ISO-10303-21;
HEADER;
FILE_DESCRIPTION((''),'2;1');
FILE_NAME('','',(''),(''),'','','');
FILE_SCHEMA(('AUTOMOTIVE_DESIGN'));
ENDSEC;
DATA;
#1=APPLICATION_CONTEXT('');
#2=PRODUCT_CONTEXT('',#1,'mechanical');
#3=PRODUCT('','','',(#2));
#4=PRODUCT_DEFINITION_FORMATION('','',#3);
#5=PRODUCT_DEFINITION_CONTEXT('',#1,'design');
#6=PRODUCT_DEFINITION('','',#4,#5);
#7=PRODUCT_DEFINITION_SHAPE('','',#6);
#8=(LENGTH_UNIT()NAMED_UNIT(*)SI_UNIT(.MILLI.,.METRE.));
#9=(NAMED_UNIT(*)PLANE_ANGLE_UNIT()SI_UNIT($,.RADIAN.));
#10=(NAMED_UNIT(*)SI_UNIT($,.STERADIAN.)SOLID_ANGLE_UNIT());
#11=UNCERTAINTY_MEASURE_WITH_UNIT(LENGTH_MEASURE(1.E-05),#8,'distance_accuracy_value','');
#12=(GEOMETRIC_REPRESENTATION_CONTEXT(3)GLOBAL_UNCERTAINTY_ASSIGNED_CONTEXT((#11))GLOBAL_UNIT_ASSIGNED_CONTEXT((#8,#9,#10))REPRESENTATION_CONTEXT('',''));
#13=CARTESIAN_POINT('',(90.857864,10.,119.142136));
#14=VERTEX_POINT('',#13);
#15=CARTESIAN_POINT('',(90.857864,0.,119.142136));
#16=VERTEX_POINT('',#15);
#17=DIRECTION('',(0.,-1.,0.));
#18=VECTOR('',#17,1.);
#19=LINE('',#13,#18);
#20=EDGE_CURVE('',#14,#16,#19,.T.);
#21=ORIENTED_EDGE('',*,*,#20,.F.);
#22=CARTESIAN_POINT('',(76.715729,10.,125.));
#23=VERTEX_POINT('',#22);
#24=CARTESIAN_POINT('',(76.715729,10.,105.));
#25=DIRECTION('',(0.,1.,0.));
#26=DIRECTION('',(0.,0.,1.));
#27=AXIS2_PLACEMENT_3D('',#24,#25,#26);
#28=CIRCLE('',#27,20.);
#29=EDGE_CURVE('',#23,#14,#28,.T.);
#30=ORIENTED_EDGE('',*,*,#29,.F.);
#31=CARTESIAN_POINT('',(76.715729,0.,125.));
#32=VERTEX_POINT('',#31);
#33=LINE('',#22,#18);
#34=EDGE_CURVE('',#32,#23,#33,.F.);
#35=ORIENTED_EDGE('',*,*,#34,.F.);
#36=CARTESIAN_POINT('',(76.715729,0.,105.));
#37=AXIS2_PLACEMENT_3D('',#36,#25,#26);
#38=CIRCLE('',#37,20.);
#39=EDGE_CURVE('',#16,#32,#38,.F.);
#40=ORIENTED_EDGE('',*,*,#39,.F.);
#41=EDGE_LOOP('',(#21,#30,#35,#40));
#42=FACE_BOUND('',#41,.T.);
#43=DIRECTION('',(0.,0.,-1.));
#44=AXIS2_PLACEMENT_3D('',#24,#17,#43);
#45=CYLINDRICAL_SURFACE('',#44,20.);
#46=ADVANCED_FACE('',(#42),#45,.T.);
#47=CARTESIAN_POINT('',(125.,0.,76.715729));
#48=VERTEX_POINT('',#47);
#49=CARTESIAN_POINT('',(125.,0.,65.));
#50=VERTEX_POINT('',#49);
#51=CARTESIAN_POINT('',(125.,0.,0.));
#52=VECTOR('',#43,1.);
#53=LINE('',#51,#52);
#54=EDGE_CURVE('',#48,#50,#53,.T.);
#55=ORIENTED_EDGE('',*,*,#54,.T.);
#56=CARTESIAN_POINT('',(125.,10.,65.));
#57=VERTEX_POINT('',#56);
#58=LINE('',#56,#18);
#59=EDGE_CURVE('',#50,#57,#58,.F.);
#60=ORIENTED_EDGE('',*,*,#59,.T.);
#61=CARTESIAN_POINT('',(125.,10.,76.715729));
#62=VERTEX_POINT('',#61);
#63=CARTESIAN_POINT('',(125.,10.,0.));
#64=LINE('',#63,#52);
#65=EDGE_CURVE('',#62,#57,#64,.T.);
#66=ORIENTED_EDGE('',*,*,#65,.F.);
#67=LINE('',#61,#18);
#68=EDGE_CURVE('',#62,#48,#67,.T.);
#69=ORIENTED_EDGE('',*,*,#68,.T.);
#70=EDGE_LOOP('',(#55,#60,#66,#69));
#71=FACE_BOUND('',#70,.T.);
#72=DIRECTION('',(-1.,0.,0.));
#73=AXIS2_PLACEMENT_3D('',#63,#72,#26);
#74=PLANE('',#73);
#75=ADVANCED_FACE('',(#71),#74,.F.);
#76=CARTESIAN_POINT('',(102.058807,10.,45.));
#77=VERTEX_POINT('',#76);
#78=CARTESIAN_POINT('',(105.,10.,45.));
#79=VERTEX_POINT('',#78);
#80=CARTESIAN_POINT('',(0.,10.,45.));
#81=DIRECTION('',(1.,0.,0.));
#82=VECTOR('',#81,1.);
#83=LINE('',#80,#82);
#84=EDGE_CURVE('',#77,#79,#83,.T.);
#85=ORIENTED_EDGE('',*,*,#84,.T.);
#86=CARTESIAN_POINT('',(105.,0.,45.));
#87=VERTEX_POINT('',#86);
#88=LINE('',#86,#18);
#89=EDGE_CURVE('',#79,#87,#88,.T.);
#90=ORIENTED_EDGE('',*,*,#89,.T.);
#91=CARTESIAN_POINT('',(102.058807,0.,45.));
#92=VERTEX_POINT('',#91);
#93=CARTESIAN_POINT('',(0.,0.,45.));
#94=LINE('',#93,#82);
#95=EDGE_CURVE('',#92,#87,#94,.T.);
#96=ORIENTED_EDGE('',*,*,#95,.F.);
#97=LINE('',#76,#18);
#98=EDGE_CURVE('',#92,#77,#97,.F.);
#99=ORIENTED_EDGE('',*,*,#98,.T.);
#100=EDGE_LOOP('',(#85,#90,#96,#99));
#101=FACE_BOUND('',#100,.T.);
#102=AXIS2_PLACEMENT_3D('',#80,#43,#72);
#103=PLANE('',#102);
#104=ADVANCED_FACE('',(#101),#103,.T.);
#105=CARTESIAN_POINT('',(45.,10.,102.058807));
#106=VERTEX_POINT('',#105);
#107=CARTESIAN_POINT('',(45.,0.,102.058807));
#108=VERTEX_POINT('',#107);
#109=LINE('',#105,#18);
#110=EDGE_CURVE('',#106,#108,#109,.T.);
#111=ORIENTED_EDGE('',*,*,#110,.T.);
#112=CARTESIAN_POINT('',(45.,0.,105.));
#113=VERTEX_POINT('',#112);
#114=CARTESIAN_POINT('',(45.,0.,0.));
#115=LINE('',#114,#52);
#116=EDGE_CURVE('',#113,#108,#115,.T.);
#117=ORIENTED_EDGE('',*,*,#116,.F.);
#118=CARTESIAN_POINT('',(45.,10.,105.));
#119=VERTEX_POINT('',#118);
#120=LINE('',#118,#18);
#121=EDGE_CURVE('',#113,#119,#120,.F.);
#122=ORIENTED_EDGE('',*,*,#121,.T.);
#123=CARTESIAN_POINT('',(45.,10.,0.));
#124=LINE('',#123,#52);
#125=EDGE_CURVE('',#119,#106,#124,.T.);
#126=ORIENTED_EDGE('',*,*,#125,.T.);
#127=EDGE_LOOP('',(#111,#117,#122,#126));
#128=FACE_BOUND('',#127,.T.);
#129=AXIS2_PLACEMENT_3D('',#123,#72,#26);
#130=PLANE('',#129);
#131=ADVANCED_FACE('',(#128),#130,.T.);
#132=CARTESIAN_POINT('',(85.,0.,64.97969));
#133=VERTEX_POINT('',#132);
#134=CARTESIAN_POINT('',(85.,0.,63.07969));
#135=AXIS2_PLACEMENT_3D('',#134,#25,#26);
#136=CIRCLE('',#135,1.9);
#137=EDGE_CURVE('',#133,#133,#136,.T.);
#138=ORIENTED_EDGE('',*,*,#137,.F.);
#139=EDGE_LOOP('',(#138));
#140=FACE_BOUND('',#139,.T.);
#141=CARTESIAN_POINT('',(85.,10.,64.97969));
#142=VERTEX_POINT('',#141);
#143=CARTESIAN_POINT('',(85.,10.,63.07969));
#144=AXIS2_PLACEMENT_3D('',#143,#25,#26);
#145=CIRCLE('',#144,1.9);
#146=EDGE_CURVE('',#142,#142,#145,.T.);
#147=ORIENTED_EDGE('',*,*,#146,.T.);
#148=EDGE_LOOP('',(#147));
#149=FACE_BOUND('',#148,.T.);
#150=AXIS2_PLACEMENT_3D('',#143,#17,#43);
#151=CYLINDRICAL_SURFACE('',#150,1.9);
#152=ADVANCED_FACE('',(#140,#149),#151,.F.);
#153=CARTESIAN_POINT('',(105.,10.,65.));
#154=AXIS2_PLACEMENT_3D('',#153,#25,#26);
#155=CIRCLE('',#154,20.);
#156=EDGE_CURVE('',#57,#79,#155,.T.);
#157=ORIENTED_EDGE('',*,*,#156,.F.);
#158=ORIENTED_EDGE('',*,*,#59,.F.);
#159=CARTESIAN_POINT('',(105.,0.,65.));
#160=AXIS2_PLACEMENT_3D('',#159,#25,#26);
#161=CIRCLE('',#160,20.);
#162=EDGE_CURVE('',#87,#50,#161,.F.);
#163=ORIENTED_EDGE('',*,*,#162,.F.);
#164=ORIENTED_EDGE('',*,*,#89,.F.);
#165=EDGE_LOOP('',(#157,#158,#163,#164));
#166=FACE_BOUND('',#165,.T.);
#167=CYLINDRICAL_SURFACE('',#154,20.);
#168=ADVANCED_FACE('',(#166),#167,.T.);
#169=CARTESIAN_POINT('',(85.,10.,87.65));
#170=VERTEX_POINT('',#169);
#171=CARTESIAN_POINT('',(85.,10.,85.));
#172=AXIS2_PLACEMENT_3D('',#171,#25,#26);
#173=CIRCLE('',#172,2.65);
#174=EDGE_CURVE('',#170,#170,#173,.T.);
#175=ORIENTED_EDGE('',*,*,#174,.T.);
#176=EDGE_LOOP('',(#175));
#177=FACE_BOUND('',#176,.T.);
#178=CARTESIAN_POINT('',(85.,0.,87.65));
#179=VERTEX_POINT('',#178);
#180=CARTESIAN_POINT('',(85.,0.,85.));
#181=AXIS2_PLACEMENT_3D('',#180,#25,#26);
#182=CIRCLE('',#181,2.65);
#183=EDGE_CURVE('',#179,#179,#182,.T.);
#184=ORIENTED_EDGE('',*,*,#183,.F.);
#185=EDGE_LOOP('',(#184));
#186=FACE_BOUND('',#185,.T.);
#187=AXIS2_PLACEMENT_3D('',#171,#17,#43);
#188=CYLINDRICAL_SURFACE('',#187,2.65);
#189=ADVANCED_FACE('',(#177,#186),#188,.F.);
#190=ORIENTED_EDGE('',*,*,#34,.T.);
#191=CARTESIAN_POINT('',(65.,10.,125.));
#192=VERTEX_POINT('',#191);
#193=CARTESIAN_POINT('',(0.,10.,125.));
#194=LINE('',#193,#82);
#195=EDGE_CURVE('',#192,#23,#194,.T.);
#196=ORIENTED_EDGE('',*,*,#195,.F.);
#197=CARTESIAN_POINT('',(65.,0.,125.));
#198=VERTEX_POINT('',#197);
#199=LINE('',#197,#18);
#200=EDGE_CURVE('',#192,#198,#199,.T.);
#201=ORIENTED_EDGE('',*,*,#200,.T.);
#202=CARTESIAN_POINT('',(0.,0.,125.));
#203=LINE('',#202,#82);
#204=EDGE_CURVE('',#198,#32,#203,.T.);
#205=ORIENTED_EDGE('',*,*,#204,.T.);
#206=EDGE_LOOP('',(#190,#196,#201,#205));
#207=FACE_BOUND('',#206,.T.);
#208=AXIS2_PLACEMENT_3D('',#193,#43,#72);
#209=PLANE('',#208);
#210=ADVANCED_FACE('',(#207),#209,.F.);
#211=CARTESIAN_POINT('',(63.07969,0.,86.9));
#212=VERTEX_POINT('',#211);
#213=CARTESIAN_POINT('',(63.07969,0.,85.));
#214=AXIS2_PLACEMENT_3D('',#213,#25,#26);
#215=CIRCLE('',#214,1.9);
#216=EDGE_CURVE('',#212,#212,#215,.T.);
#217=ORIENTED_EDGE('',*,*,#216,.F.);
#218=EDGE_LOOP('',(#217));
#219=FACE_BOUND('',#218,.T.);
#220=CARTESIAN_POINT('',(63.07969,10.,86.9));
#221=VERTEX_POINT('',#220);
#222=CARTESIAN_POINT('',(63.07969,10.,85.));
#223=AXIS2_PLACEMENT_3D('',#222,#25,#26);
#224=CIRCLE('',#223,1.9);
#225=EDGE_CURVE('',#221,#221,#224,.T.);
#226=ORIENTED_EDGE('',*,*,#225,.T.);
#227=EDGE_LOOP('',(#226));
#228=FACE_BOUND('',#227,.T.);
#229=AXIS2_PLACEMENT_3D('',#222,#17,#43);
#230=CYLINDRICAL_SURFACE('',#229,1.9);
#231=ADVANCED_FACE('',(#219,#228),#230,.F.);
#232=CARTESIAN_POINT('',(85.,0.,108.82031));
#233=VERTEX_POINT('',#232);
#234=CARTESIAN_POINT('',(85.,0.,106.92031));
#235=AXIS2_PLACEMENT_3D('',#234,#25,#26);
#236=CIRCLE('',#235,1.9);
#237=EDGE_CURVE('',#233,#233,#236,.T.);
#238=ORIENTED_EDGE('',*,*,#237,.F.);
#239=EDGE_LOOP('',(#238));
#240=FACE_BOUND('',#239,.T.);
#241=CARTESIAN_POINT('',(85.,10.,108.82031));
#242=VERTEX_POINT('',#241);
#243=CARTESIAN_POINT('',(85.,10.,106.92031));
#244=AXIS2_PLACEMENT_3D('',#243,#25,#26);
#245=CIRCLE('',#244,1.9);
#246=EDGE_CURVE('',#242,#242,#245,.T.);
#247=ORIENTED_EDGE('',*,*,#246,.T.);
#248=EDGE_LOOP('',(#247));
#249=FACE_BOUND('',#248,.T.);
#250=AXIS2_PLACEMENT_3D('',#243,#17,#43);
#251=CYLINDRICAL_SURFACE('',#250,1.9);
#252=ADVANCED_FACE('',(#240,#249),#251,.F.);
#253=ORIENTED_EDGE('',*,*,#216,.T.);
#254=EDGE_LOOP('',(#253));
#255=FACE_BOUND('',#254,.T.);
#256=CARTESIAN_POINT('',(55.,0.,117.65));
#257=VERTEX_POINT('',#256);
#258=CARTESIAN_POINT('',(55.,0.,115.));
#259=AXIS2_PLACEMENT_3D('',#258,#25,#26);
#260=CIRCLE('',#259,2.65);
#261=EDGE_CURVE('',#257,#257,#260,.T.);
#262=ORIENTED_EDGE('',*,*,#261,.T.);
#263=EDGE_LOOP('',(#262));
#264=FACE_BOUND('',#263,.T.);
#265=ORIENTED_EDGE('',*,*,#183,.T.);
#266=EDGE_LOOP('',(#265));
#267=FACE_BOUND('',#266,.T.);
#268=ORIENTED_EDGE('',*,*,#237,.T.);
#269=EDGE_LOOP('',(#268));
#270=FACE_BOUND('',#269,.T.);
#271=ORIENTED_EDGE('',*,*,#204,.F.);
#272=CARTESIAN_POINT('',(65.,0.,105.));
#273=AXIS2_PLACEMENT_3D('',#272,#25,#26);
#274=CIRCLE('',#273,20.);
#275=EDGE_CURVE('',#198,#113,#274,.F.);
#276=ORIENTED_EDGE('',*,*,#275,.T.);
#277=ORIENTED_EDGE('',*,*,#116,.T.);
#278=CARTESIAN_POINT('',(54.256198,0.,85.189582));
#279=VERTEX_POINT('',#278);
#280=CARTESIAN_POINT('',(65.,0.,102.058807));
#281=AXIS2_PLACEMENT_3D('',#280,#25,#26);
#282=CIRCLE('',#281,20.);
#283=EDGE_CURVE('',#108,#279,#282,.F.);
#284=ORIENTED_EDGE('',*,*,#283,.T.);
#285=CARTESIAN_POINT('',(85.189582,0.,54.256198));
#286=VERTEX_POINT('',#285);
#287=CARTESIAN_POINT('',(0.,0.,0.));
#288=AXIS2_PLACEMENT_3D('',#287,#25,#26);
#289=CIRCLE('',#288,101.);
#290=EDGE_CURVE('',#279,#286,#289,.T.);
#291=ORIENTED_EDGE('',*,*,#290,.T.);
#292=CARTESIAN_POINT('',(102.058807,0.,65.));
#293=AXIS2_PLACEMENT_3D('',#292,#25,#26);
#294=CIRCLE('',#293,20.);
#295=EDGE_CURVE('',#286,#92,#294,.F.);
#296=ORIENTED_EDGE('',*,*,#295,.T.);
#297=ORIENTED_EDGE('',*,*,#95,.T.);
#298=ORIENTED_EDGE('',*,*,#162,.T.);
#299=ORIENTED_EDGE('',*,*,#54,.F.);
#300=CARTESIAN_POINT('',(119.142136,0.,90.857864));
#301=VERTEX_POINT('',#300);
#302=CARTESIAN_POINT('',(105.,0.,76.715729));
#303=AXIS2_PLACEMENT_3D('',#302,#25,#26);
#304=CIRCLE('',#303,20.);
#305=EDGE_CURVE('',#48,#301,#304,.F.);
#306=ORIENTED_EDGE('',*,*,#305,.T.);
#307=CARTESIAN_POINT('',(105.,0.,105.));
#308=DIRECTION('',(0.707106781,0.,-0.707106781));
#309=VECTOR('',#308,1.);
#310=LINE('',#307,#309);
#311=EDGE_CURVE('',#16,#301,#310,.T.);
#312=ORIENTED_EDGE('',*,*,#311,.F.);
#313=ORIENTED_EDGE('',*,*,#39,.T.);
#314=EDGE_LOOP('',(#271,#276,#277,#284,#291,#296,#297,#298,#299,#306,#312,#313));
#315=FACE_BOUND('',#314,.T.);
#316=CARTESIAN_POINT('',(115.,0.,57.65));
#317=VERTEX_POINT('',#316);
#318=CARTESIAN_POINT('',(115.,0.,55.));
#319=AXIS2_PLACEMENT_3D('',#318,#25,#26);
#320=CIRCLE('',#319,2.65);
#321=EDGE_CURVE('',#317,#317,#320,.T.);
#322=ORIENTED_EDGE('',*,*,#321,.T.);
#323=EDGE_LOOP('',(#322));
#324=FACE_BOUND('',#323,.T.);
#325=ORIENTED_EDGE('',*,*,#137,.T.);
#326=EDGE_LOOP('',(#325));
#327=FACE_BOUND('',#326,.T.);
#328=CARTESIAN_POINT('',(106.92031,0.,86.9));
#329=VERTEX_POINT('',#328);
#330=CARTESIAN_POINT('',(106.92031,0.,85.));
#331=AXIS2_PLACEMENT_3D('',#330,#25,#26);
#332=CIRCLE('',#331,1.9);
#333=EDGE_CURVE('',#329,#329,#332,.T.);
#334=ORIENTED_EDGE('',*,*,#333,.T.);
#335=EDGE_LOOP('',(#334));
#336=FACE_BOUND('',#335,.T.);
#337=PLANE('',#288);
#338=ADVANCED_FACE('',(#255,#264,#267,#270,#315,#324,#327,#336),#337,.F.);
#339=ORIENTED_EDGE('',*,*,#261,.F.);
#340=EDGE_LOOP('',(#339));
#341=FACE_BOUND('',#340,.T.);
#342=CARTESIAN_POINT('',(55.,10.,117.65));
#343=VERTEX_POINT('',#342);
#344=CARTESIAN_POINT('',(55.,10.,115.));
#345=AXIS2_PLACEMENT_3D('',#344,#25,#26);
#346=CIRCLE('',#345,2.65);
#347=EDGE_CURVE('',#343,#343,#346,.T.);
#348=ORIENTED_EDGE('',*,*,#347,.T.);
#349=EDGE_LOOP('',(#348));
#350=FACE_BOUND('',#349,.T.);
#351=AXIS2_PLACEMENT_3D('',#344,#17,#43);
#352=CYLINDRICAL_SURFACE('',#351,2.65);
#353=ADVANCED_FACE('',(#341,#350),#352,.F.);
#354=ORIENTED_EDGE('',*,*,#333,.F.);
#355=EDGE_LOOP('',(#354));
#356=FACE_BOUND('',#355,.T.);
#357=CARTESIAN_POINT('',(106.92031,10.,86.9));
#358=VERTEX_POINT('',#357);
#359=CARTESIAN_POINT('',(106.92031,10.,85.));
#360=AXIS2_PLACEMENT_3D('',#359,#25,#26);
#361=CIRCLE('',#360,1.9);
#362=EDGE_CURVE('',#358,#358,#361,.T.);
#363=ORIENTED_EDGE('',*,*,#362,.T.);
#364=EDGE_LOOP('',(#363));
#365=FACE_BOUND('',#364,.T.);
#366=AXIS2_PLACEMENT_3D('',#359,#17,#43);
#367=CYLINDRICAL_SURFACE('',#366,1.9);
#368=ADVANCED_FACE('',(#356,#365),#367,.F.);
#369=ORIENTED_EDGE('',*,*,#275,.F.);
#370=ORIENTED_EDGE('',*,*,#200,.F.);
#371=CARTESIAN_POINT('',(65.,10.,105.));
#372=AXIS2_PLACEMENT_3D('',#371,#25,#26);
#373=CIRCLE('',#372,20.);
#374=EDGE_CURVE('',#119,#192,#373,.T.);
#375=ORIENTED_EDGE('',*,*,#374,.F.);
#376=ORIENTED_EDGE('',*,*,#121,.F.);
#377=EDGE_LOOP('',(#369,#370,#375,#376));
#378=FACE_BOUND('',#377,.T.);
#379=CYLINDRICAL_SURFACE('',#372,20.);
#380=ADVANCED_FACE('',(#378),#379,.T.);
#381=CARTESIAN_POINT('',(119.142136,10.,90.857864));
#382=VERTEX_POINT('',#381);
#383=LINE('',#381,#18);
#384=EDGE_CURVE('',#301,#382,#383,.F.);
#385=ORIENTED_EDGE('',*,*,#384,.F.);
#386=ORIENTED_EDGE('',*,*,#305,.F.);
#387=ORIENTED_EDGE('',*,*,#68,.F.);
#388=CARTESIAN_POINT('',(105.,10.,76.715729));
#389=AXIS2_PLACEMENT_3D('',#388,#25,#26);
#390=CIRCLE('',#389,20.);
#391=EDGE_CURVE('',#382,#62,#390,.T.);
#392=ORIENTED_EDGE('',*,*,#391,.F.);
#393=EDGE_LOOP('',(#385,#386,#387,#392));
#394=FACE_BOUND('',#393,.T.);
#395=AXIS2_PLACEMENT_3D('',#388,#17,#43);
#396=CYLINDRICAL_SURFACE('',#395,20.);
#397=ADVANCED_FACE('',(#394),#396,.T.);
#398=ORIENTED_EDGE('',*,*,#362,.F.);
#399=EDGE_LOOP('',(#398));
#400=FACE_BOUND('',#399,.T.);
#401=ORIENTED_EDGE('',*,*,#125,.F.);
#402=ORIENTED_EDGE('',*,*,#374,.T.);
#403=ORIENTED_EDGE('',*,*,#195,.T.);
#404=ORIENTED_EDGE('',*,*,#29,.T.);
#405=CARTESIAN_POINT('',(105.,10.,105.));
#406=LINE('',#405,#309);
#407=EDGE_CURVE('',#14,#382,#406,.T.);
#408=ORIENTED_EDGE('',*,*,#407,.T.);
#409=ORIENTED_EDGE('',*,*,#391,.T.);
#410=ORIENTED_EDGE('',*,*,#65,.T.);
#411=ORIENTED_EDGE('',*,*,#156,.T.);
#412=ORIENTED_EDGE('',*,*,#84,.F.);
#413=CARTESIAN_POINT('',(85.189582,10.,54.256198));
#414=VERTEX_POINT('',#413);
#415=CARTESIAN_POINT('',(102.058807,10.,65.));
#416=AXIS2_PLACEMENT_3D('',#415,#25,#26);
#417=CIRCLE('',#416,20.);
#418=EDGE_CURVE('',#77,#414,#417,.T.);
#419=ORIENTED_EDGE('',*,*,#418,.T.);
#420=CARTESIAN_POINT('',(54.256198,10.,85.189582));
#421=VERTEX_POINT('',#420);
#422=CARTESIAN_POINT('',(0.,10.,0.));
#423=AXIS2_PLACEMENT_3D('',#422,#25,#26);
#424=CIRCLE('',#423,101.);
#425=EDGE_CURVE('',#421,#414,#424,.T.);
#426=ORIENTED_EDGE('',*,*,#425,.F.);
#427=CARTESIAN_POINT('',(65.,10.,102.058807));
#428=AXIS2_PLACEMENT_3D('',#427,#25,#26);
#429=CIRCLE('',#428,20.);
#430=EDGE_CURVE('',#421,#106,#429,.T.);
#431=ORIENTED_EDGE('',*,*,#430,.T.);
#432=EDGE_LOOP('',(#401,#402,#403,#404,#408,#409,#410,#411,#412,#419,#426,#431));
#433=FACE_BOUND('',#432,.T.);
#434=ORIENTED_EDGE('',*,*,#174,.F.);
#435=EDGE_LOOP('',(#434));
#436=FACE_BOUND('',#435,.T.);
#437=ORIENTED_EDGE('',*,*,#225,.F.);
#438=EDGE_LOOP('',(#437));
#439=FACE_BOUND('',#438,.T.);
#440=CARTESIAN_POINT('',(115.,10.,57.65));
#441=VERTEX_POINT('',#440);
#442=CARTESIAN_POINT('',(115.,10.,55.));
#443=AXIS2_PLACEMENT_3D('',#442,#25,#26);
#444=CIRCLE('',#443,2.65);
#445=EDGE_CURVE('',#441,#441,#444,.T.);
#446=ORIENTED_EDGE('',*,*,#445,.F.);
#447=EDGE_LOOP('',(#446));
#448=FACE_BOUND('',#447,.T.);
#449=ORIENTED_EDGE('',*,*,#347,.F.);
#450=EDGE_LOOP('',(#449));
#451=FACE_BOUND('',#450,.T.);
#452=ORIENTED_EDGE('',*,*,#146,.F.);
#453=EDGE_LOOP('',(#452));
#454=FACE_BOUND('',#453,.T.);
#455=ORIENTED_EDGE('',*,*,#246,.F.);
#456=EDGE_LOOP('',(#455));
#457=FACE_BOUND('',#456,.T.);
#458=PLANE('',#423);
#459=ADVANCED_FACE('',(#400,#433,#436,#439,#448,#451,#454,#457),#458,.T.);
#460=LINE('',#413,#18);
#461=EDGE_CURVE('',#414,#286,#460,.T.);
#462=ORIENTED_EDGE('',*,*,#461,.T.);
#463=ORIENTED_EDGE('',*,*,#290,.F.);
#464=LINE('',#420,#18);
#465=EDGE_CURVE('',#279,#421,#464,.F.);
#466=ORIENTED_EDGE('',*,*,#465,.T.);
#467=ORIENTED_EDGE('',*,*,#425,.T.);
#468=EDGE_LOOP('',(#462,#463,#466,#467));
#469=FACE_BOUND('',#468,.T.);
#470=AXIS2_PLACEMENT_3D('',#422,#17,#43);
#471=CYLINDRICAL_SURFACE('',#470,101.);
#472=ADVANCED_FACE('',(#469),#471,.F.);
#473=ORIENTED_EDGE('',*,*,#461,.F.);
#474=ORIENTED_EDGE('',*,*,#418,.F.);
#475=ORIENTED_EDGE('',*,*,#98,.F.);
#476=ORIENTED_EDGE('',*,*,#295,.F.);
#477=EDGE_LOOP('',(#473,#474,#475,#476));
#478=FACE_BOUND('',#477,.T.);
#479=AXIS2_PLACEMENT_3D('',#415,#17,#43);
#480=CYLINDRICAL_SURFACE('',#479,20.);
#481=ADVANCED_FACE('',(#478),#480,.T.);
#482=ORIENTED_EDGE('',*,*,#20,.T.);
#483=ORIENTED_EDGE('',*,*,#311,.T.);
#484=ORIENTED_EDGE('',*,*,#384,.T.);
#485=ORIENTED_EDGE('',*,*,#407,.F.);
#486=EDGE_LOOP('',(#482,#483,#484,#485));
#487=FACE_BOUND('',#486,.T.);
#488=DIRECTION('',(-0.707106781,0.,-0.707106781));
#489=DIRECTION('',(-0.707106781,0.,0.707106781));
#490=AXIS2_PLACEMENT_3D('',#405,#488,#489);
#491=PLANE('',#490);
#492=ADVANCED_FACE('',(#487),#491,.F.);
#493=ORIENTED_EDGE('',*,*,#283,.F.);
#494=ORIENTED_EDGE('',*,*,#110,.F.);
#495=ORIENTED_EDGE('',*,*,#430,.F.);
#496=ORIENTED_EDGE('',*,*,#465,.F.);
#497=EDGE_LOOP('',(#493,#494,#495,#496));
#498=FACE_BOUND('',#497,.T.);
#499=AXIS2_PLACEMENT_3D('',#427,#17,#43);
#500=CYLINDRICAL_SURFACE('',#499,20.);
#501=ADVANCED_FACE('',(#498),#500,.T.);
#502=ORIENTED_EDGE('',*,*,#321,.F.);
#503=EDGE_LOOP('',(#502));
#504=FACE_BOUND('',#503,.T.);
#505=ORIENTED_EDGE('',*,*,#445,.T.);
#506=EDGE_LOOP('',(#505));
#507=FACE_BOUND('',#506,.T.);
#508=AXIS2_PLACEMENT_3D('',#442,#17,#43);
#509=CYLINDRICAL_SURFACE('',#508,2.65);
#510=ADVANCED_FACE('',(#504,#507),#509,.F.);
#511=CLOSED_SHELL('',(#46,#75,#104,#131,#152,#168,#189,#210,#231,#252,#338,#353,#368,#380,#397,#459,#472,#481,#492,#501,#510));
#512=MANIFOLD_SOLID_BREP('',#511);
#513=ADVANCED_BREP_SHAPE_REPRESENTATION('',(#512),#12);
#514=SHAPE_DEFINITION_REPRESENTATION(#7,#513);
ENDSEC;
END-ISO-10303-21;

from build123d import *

# Parameters (mm, degrees)
EXTRUDE_4_OUTLINE_R   = 2.65
EXTRUDE_4_OUTLINE_R_2 = 1.9
EXTRUDE_4_DEPTH       = 10
FILLET_2_R            = 20


# Read off the part's stored shape, not the designer's step: 凸台-拉伸4
with BuildPart() as part:
    # 凸台-拉伸4 outline → 凸台-拉伸4 (new body)
    with BuildSketch(Plane(origin=(0, 0, 0), x_dir=(1, 0, 0), z_dir=(0, 1, 0))):
        with BuildLine():
            Line((85, -125), (125, -85))
            Line((125, -85), (125, -45))
            Line((125, -45), (90.421236444, -45))
            ThreePointArc((90.421236444, -45), (71.4177849, -71.4177849), (45, -90.421236444))
            Line((45, -90.421236444), (45, -125))
            Line((45, -125), (85, -125))
        make_face()
        with Locations((55, -115)):
            Circle(EXTRUDE_4_OUTLINE_R, mode=Mode.SUBTRACT)
        with Locations((85, -106.920310217)):
            Circle(EXTRUDE_4_OUTLINE_R_2, mode=Mode.SUBTRACT)
        with Locations((63.079689783, -85)):
            Circle(EXTRUDE_4_OUTLINE_R_2, mode=Mode.SUBTRACT)
        with Locations((85, -85)):
            Circle(EXTRUDE_4_OUTLINE_R, mode=Mode.SUBTRACT)
        with Locations((106.920310217, -85)):
            Circle(EXTRUDE_4_OUTLINE_R_2, mode=Mode.SUBTRACT)
        with Locations((85, -63.079689783)):
            Circle(EXTRUDE_4_OUTLINE_R_2, mode=Mode.SUBTRACT)
        with Locations((115, -55)):
            Circle(EXTRUDE_4_OUTLINE_R, mode=Mode.SUBTRACT)
    extrude(amount=EXTRUDE_4_DEPTH)

    # 圆角2
    fillet_2_edges = [part.edges().sort_by_distance(p)[0] for p in [
        (85, 5, 125),
        (45, 5, 125),
        (45, 5, 90.421236444),
        (90.421236444, 5, 45),
        (125, 5, 45),
        (125, 5, 85),
    ]]
    fillet(fillet_2_edges, radius=FILLET_2_R)


solid = part.part
